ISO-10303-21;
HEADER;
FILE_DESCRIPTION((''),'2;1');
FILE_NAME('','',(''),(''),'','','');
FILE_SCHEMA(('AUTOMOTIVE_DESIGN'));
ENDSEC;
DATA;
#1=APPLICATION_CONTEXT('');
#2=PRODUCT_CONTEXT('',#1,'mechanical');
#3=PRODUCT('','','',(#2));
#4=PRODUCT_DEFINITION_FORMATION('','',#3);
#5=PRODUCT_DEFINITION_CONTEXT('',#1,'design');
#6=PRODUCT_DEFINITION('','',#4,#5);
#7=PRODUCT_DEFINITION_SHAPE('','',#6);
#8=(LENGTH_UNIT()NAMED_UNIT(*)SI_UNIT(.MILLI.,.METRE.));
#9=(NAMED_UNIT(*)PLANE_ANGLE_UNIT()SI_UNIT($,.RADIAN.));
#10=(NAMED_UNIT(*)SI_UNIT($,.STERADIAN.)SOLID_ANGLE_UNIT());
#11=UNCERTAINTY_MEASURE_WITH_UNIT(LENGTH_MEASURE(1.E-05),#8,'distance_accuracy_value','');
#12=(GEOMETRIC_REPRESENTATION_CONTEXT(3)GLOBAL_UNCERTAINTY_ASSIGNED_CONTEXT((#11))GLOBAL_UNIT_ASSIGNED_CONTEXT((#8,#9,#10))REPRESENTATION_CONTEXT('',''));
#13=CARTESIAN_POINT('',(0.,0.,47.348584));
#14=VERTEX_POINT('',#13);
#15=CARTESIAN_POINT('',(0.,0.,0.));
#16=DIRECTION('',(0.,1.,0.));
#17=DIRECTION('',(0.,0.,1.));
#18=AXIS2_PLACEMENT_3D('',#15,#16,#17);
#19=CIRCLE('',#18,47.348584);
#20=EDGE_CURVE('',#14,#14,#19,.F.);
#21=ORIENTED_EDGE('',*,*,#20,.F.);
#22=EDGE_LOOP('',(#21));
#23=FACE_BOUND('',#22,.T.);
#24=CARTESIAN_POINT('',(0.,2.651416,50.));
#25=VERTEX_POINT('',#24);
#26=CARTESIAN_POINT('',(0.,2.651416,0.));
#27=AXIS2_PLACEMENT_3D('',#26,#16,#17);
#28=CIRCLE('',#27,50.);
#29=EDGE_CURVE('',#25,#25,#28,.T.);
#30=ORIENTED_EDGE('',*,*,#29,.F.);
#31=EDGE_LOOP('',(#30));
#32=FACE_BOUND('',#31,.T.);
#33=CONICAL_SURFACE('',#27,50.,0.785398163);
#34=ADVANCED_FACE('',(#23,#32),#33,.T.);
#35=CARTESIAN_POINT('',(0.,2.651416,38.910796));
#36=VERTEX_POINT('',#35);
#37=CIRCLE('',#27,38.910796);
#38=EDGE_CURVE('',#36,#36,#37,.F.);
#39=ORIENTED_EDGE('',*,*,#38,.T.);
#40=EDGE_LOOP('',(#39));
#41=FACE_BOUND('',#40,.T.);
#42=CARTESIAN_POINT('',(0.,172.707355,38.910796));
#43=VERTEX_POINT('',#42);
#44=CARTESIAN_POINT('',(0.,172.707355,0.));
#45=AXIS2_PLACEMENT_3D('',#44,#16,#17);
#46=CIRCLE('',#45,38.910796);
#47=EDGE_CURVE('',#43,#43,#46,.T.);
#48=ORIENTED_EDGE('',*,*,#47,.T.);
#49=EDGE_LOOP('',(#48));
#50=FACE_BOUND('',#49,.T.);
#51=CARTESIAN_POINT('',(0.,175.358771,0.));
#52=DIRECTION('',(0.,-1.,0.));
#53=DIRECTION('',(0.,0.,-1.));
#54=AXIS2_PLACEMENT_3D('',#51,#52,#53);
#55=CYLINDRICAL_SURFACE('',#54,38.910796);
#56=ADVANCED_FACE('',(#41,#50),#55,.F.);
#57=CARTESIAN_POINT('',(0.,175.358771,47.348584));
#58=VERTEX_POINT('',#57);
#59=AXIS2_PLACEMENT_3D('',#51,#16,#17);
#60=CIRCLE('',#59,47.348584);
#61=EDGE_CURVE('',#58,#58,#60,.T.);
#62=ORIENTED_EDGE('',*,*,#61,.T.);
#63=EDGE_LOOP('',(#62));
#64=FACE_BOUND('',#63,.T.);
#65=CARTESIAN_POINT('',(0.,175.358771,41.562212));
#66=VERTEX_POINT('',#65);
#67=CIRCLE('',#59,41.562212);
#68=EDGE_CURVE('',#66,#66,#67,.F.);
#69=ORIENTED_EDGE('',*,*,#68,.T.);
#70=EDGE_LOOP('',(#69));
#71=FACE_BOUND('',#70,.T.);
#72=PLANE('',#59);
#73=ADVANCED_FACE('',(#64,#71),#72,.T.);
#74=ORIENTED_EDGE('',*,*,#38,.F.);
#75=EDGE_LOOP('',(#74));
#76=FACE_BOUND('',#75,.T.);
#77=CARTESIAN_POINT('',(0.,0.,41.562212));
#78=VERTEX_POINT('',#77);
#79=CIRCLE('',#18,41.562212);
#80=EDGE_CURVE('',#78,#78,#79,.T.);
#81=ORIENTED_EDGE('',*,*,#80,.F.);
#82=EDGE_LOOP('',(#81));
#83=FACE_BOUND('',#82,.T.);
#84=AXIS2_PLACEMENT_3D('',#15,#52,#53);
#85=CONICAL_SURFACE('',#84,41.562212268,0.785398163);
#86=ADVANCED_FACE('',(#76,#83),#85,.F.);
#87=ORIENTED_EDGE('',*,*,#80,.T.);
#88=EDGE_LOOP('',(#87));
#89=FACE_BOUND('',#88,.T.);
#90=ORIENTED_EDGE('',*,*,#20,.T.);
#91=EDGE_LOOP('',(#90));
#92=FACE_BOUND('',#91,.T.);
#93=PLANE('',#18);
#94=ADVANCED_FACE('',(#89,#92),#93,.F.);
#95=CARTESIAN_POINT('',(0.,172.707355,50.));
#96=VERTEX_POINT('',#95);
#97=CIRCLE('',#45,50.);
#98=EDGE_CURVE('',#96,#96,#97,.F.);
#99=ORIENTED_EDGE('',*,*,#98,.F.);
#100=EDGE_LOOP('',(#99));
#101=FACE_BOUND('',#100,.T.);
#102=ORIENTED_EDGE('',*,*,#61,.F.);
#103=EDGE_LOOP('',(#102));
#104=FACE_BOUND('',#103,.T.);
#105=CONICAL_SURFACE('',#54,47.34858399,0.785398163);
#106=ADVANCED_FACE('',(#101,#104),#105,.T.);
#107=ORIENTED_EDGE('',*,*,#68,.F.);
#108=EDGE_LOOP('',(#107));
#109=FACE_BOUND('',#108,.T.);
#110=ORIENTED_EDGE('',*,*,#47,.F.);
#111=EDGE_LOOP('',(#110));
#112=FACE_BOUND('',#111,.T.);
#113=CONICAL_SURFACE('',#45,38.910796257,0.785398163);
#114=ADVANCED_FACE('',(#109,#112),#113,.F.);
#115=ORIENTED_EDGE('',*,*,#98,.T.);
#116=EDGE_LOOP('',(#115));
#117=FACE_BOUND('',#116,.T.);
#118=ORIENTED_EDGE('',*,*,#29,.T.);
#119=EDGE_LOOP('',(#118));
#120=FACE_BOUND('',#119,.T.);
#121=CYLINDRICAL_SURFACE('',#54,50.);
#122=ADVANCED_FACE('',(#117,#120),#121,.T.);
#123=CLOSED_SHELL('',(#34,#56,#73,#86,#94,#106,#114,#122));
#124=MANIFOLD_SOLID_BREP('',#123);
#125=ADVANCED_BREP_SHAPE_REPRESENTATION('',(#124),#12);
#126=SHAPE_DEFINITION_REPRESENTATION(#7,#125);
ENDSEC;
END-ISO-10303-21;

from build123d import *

# Parameters (mm, degrees)
SKETCH1_R           = 50
BOSS_EXTRUDE1_DEPTH = 175.358771011
SKETCH2_R           = 38.910796257
CUT_EXTRUDE1_DEPTH  = 190.078551323
CHAMFER1_SIZE       = 2.65141601


with BuildPart() as part:
    # Sketch1 → Boss-Extrude1 (new body)
    with BuildSketch(Plane(origin=(0, 0, 0), x_dir=(1, 0, 0), z_dir=(0, 1, 0))):
        Circle(SKETCH1_R)
    extrude(amount=BOSS_EXTRUDE1_DEPTH)

    # Sketch2 → Cut-Extrude1 (cut, through all)
    with BuildSketch(Plane(origin=(0, 0, 0), x_dir=(1, 0, 0), z_dir=(0, 1, 0))):
        Circle(SKETCH2_R)
    extrude(amount=CUT_EXTRUDE1_DEPTH, mode=Mode.SUBTRACT)

    # Chamfer1
    chamfer1_edges = [part.edges().sort_by_distance(p)[0] for p in [
        (-38.910796257, 175.358771011, 0),
        (-38.910796257, 0, 0),
        (-50, 0, 0),
        (-50, 175.358771011, 0),
    ]]
    chamfer(chamfer1_edges, length=CHAMFER1_SIZE)


solid = part.part
